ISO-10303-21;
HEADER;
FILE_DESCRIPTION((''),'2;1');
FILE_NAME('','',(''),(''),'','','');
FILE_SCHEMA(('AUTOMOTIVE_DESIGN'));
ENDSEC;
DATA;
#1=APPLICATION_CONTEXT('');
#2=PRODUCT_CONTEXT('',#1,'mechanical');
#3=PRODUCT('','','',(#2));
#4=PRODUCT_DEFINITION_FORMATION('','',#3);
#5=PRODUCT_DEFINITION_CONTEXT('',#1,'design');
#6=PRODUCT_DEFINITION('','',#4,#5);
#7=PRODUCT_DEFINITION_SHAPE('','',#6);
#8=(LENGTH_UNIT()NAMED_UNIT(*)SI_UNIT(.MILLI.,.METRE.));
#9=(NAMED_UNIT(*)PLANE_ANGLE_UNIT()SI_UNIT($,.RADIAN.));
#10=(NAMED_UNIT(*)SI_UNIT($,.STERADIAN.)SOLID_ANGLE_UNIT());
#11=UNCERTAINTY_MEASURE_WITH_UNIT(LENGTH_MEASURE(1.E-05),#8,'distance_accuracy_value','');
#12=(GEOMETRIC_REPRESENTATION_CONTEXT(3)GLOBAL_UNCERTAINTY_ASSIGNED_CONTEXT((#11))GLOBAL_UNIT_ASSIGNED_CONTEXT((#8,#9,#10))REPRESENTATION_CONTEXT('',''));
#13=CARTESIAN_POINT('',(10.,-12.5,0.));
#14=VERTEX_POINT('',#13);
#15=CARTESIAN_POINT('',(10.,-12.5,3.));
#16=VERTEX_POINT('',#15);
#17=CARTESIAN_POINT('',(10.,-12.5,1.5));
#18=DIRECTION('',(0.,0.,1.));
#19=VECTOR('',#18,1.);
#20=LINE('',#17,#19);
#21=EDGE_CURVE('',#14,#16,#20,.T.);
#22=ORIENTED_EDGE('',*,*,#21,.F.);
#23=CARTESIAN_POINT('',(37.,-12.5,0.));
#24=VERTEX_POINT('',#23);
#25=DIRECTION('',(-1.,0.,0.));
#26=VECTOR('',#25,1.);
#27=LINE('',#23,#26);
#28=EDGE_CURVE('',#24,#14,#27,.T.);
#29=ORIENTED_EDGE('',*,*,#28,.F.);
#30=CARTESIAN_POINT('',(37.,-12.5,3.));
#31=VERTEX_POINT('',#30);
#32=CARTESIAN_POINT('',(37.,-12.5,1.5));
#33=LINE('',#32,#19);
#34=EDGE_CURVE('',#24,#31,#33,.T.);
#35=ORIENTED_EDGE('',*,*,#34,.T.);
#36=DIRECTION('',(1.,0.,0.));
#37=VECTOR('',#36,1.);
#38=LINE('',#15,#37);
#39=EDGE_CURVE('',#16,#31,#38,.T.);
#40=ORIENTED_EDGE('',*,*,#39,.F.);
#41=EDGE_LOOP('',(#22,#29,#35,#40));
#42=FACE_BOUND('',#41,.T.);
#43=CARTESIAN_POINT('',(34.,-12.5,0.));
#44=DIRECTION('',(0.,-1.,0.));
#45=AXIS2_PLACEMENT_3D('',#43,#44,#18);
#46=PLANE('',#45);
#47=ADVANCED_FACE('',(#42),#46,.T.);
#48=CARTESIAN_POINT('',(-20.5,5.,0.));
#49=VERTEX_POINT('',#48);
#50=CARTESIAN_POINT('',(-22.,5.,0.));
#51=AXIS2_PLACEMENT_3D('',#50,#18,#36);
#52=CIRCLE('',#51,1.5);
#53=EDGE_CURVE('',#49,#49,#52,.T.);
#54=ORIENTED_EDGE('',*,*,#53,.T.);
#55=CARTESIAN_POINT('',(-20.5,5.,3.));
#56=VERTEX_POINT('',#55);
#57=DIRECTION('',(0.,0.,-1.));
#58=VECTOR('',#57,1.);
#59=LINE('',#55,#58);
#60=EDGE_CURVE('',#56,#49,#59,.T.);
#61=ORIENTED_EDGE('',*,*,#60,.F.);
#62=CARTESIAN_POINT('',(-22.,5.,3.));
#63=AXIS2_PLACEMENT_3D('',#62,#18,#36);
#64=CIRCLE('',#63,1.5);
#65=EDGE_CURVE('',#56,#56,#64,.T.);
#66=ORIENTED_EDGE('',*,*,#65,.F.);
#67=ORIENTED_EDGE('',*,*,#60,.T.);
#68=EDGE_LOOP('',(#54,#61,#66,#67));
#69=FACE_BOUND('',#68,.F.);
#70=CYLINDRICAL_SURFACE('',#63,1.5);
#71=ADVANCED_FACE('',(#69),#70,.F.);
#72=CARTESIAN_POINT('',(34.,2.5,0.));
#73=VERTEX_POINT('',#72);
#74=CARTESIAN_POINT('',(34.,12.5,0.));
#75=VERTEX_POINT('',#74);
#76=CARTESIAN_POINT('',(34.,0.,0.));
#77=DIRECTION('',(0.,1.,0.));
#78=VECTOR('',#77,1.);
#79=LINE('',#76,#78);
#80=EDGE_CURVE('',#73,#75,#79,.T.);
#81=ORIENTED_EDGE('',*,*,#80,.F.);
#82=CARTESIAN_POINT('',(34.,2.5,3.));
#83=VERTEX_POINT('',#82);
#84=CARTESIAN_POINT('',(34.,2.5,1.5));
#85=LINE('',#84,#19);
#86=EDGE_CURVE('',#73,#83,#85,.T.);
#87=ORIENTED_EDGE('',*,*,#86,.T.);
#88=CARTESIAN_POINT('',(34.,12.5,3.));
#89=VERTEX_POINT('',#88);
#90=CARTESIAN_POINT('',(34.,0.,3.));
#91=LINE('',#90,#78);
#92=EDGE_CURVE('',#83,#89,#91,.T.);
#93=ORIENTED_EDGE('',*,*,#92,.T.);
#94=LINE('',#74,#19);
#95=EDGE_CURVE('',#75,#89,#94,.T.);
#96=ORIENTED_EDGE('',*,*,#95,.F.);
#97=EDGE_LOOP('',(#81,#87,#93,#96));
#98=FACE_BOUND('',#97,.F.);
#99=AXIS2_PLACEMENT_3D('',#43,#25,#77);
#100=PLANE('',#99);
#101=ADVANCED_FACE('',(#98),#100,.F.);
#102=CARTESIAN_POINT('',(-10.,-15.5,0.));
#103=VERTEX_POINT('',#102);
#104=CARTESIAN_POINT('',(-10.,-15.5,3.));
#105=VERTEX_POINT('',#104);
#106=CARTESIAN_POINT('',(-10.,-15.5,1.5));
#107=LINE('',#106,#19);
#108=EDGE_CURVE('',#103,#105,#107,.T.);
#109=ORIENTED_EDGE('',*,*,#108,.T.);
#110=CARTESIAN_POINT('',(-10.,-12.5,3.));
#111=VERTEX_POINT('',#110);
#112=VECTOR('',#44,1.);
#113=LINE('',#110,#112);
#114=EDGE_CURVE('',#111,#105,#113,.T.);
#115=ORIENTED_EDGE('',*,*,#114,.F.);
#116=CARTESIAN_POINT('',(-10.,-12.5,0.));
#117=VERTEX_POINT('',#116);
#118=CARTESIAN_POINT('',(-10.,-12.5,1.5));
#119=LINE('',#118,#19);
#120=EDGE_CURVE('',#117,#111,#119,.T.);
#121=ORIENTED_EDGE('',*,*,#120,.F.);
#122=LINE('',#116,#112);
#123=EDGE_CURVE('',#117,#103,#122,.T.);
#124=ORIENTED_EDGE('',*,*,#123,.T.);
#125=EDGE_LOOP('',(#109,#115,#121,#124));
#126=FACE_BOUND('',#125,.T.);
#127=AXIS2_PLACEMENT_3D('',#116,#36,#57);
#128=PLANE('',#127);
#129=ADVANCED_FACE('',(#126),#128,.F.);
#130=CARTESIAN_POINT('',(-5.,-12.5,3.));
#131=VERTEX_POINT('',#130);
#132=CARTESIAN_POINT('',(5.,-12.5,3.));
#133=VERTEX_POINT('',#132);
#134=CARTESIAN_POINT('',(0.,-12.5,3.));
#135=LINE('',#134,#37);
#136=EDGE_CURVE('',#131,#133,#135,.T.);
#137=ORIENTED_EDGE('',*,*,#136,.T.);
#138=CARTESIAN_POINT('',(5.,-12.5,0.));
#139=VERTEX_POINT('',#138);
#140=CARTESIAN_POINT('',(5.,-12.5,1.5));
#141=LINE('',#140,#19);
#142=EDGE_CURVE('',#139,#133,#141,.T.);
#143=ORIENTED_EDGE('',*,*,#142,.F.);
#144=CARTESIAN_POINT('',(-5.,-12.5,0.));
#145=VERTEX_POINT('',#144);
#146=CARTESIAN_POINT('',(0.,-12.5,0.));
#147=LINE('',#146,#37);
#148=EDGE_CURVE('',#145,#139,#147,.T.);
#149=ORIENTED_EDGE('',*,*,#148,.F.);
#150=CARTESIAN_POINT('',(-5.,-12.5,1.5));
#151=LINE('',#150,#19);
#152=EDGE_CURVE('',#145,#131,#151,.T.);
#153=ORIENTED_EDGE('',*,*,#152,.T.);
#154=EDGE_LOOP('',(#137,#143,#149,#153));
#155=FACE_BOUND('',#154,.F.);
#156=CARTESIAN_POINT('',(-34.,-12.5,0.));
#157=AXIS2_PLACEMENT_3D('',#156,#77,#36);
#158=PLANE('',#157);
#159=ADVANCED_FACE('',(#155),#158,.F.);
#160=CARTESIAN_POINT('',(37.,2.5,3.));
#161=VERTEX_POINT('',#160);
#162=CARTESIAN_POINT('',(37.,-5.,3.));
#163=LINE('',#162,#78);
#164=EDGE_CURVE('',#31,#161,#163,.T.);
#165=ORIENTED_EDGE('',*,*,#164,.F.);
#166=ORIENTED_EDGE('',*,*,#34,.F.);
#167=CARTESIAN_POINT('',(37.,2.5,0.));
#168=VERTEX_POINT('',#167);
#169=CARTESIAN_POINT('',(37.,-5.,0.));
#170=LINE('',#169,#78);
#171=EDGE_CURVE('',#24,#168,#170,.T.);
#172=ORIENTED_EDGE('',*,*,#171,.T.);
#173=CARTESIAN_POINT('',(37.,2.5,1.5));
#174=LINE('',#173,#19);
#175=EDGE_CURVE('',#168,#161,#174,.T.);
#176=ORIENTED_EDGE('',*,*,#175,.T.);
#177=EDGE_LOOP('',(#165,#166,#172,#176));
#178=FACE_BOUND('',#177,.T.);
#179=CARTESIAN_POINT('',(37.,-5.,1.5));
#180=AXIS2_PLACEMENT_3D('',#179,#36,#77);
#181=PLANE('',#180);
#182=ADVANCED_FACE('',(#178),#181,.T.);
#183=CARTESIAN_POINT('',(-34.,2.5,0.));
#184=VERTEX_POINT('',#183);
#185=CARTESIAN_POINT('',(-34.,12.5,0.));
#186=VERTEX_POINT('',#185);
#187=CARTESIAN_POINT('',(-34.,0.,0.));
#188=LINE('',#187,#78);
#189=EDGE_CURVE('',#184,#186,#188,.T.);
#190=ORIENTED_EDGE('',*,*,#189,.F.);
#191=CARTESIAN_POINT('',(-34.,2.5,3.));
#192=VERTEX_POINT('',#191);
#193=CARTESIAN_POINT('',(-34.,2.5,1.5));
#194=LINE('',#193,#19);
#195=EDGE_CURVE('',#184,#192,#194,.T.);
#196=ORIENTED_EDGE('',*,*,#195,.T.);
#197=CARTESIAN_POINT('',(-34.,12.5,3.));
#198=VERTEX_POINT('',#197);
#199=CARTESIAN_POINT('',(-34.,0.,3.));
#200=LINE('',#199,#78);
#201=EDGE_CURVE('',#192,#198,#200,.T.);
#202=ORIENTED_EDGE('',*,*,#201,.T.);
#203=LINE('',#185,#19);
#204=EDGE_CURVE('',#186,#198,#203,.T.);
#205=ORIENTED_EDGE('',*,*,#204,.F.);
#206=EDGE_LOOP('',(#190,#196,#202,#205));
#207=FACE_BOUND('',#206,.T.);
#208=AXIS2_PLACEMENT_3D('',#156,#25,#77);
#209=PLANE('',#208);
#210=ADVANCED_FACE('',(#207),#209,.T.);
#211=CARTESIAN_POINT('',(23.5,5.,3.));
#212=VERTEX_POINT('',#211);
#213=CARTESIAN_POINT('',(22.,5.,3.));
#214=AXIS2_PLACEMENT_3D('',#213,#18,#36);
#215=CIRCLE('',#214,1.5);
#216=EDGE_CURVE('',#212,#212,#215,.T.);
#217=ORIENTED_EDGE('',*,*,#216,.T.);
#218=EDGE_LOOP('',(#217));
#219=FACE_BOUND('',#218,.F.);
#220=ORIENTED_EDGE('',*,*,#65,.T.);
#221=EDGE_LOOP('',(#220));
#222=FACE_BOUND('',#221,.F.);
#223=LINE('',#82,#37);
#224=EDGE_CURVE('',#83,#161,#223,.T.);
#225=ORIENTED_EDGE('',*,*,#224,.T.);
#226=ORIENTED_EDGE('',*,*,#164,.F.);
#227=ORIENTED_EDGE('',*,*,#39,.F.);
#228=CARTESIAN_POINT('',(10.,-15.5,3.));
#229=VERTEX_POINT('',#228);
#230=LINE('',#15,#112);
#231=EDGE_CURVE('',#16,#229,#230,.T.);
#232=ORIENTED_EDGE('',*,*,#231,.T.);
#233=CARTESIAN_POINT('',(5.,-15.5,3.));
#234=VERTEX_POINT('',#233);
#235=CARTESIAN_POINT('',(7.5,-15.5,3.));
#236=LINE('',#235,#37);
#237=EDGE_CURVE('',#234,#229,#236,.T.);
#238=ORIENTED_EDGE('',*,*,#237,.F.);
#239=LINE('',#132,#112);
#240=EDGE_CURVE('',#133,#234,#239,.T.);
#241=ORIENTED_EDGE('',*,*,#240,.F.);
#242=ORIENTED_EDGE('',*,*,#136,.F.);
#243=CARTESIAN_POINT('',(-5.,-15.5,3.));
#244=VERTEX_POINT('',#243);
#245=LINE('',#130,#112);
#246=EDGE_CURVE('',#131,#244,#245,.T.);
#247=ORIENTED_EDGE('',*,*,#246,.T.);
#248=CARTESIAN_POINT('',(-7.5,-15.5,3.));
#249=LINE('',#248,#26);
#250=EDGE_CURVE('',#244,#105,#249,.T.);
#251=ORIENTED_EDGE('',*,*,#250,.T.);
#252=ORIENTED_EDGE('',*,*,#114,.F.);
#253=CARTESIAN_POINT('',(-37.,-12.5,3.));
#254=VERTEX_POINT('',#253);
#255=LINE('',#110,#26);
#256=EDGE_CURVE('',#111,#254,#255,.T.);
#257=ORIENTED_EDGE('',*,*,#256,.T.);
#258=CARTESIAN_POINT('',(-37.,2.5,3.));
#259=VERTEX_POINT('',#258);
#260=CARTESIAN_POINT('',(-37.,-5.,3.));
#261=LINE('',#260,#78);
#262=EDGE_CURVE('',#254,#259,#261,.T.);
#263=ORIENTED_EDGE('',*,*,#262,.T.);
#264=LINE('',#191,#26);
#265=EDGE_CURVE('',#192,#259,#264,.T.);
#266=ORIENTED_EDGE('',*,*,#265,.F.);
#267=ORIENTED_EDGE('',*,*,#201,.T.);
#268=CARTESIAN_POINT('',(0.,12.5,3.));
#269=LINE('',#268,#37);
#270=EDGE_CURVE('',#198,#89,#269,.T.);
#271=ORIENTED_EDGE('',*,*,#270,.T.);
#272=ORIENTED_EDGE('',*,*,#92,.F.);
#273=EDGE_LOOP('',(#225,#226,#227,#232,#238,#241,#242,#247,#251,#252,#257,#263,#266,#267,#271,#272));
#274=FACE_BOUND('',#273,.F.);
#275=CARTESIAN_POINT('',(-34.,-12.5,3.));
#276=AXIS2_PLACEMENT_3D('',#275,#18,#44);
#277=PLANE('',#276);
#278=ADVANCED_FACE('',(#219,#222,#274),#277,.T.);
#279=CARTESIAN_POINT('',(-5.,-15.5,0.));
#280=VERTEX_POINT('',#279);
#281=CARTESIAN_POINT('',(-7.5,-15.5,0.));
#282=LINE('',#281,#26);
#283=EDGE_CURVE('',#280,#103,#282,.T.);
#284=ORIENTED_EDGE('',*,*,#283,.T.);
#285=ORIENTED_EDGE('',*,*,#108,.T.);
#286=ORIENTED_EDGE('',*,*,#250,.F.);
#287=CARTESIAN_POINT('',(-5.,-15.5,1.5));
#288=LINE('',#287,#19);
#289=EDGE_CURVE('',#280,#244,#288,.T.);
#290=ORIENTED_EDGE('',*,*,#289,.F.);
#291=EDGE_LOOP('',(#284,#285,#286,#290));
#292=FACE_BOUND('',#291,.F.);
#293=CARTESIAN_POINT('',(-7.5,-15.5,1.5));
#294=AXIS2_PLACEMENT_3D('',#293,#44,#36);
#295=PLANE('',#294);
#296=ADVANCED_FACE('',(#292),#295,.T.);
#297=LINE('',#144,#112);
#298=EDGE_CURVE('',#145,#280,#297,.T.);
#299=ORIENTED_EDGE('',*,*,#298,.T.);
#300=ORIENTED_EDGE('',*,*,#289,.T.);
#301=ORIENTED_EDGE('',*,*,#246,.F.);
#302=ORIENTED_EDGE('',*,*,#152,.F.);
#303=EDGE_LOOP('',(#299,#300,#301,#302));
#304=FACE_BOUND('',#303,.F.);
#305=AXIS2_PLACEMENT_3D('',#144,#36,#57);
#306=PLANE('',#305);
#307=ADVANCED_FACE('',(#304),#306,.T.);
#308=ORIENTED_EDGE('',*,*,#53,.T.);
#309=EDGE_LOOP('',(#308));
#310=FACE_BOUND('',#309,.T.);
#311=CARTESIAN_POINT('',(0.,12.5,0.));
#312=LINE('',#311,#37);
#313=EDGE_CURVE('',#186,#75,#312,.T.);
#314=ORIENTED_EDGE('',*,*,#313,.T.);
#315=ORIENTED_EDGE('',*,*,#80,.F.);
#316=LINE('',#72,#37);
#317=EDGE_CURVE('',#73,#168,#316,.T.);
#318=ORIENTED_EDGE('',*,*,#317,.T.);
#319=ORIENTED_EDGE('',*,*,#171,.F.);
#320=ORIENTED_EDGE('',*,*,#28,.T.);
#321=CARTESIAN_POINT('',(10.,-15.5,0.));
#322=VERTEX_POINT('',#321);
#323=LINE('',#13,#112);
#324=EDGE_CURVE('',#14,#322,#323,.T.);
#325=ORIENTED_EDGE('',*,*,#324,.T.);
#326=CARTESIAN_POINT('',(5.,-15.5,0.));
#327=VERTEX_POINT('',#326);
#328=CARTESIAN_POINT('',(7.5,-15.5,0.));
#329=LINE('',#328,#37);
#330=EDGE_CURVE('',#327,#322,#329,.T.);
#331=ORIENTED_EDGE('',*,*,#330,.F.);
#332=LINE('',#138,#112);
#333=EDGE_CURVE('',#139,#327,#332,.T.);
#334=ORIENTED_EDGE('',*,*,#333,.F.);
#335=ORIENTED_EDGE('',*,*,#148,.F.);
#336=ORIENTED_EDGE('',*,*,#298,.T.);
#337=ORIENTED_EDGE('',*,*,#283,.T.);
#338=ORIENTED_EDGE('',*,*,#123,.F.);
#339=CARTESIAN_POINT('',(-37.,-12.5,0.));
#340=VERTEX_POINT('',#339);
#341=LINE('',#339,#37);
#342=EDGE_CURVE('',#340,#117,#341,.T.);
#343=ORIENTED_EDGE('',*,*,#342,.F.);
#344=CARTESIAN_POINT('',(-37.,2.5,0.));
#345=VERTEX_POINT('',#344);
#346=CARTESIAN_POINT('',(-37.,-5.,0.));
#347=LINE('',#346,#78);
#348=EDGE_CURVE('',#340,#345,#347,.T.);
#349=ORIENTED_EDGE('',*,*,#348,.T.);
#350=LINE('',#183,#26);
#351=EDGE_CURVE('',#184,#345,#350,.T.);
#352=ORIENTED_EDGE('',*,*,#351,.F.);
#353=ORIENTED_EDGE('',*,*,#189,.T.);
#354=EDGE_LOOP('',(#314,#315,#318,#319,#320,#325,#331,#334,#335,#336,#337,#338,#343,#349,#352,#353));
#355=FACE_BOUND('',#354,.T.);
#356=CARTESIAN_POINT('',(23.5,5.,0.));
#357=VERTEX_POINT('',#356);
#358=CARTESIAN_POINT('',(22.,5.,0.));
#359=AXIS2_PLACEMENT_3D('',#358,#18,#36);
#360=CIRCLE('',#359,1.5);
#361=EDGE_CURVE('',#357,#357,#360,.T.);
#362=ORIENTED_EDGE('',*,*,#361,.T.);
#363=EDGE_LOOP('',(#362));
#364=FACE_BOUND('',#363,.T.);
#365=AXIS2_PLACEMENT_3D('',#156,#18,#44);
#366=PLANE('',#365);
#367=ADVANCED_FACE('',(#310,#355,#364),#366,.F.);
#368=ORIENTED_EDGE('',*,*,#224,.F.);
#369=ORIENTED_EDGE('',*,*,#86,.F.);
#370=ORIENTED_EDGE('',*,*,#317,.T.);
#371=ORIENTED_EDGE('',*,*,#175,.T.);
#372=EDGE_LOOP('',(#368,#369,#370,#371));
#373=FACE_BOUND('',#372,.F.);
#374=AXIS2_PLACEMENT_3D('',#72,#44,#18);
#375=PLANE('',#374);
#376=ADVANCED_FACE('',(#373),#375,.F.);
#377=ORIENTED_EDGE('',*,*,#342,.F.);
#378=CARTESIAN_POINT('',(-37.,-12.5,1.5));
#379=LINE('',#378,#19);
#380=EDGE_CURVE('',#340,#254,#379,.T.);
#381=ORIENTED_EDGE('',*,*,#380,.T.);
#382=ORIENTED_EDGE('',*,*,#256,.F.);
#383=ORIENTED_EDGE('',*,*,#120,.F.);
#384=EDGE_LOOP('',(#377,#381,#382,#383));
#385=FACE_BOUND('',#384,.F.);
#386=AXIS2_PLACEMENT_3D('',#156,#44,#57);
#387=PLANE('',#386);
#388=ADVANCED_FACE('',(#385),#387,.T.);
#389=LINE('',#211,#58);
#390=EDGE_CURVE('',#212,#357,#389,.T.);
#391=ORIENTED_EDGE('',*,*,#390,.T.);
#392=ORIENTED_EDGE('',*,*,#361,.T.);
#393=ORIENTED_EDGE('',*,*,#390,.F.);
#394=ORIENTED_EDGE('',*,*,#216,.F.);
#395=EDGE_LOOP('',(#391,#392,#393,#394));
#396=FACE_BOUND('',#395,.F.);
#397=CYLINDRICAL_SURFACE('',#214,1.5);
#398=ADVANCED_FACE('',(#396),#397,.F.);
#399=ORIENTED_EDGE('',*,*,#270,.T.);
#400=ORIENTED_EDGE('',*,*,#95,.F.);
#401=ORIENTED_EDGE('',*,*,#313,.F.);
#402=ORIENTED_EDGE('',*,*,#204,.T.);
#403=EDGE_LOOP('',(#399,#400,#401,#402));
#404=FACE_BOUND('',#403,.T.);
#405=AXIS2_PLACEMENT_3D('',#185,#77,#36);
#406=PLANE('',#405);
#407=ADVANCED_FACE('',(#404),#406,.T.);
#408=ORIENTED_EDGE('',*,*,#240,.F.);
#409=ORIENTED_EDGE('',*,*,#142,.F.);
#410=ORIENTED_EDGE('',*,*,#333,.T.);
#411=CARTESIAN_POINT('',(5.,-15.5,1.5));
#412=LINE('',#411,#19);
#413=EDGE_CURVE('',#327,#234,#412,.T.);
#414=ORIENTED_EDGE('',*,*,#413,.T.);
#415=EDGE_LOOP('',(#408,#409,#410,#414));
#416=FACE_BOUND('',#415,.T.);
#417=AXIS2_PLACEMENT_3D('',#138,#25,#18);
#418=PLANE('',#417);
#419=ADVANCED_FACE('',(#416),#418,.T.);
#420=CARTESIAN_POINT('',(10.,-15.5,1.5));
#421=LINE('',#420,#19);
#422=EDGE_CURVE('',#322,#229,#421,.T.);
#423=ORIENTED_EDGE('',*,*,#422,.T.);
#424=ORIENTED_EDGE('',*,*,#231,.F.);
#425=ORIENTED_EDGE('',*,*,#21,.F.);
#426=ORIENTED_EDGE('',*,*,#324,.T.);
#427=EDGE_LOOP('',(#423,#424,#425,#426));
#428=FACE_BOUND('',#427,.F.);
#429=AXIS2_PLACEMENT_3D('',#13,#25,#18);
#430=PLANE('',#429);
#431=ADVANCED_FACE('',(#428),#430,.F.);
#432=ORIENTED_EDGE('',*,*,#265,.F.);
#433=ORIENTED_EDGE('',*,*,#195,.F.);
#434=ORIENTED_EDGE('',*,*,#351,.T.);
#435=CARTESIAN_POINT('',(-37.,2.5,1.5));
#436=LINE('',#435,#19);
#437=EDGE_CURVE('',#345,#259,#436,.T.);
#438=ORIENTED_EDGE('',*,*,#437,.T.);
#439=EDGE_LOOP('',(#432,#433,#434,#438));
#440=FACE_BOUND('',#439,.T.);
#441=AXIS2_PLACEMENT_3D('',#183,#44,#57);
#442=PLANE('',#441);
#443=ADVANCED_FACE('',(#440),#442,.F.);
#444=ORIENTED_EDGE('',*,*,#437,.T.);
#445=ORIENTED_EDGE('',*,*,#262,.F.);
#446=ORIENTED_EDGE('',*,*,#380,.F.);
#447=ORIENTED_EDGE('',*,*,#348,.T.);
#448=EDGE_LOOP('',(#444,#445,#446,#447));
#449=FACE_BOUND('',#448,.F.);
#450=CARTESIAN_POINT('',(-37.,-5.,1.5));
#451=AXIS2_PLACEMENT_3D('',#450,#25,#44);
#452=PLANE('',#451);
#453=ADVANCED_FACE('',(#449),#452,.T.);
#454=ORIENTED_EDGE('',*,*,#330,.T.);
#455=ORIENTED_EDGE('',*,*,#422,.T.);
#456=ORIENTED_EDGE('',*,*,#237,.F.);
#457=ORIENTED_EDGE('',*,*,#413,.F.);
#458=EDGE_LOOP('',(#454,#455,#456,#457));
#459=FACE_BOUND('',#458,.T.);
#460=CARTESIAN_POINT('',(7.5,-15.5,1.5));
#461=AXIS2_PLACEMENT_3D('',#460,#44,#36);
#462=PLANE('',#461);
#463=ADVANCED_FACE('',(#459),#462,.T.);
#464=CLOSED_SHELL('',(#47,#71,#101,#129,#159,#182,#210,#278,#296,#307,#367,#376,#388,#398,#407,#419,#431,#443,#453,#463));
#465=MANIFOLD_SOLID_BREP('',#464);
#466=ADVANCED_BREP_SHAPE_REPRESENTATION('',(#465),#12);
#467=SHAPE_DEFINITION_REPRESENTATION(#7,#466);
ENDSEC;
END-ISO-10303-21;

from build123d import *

# Parameters (mm, degrees)
F0_W     = 68
F0_H     = 25
F1_DEPTH = 3
F2_W     = 5
F2_H     = 3
F3_DEPTH = 3
F4_W     = 15
F4_H     = 3
F5_DEPTH = 3
F7_R     = 1.5
F8_DEPTH = 3


# Not quite as in the source:
# - a feature names something its author has since deleted; it is built from what else it names


with BuildPart() as f1:
    # F0 (on Top) → F1 (new body)
    with BuildSketch(Plane.XY):
        Rectangle(F0_W, F0_H)
    extrude(amount=F1_DEPTH)

    # F2 (on face) → F3 (join)
    with BuildSketch(Plane.XZ.offset(12.5)):
        with Locations((7.5, 1.5)):
            Rectangle(F2_W, F2_H)
    extrude(amount=F3_DEPTH)

    # F4 (on face) → F5 (join)
    with BuildSketch(Plane.YZ.offset(34)):
        with Locations((-5, 1.5)):
            Rectangle(F4_W, F4_H)
    extrude(amount=F5_DEPTH)

    # F6: F1 across plane


with BuildPart() as f1_1:
    add(f1.part)
    add(f1.part.mirror(Plane.YZ))

    # F7 (on face) → F8 (cut)
    with BuildSketch(Plane.XY.offset(3)):
        with Locations((22, 5)):
            Circle(F7_R)
        with Locations((-22, 5)):
            Circle(F7_R)
    extrude(amount=-F8_DEPTH, mode=Mode.SUBTRACT)


solid = f1_1.part
